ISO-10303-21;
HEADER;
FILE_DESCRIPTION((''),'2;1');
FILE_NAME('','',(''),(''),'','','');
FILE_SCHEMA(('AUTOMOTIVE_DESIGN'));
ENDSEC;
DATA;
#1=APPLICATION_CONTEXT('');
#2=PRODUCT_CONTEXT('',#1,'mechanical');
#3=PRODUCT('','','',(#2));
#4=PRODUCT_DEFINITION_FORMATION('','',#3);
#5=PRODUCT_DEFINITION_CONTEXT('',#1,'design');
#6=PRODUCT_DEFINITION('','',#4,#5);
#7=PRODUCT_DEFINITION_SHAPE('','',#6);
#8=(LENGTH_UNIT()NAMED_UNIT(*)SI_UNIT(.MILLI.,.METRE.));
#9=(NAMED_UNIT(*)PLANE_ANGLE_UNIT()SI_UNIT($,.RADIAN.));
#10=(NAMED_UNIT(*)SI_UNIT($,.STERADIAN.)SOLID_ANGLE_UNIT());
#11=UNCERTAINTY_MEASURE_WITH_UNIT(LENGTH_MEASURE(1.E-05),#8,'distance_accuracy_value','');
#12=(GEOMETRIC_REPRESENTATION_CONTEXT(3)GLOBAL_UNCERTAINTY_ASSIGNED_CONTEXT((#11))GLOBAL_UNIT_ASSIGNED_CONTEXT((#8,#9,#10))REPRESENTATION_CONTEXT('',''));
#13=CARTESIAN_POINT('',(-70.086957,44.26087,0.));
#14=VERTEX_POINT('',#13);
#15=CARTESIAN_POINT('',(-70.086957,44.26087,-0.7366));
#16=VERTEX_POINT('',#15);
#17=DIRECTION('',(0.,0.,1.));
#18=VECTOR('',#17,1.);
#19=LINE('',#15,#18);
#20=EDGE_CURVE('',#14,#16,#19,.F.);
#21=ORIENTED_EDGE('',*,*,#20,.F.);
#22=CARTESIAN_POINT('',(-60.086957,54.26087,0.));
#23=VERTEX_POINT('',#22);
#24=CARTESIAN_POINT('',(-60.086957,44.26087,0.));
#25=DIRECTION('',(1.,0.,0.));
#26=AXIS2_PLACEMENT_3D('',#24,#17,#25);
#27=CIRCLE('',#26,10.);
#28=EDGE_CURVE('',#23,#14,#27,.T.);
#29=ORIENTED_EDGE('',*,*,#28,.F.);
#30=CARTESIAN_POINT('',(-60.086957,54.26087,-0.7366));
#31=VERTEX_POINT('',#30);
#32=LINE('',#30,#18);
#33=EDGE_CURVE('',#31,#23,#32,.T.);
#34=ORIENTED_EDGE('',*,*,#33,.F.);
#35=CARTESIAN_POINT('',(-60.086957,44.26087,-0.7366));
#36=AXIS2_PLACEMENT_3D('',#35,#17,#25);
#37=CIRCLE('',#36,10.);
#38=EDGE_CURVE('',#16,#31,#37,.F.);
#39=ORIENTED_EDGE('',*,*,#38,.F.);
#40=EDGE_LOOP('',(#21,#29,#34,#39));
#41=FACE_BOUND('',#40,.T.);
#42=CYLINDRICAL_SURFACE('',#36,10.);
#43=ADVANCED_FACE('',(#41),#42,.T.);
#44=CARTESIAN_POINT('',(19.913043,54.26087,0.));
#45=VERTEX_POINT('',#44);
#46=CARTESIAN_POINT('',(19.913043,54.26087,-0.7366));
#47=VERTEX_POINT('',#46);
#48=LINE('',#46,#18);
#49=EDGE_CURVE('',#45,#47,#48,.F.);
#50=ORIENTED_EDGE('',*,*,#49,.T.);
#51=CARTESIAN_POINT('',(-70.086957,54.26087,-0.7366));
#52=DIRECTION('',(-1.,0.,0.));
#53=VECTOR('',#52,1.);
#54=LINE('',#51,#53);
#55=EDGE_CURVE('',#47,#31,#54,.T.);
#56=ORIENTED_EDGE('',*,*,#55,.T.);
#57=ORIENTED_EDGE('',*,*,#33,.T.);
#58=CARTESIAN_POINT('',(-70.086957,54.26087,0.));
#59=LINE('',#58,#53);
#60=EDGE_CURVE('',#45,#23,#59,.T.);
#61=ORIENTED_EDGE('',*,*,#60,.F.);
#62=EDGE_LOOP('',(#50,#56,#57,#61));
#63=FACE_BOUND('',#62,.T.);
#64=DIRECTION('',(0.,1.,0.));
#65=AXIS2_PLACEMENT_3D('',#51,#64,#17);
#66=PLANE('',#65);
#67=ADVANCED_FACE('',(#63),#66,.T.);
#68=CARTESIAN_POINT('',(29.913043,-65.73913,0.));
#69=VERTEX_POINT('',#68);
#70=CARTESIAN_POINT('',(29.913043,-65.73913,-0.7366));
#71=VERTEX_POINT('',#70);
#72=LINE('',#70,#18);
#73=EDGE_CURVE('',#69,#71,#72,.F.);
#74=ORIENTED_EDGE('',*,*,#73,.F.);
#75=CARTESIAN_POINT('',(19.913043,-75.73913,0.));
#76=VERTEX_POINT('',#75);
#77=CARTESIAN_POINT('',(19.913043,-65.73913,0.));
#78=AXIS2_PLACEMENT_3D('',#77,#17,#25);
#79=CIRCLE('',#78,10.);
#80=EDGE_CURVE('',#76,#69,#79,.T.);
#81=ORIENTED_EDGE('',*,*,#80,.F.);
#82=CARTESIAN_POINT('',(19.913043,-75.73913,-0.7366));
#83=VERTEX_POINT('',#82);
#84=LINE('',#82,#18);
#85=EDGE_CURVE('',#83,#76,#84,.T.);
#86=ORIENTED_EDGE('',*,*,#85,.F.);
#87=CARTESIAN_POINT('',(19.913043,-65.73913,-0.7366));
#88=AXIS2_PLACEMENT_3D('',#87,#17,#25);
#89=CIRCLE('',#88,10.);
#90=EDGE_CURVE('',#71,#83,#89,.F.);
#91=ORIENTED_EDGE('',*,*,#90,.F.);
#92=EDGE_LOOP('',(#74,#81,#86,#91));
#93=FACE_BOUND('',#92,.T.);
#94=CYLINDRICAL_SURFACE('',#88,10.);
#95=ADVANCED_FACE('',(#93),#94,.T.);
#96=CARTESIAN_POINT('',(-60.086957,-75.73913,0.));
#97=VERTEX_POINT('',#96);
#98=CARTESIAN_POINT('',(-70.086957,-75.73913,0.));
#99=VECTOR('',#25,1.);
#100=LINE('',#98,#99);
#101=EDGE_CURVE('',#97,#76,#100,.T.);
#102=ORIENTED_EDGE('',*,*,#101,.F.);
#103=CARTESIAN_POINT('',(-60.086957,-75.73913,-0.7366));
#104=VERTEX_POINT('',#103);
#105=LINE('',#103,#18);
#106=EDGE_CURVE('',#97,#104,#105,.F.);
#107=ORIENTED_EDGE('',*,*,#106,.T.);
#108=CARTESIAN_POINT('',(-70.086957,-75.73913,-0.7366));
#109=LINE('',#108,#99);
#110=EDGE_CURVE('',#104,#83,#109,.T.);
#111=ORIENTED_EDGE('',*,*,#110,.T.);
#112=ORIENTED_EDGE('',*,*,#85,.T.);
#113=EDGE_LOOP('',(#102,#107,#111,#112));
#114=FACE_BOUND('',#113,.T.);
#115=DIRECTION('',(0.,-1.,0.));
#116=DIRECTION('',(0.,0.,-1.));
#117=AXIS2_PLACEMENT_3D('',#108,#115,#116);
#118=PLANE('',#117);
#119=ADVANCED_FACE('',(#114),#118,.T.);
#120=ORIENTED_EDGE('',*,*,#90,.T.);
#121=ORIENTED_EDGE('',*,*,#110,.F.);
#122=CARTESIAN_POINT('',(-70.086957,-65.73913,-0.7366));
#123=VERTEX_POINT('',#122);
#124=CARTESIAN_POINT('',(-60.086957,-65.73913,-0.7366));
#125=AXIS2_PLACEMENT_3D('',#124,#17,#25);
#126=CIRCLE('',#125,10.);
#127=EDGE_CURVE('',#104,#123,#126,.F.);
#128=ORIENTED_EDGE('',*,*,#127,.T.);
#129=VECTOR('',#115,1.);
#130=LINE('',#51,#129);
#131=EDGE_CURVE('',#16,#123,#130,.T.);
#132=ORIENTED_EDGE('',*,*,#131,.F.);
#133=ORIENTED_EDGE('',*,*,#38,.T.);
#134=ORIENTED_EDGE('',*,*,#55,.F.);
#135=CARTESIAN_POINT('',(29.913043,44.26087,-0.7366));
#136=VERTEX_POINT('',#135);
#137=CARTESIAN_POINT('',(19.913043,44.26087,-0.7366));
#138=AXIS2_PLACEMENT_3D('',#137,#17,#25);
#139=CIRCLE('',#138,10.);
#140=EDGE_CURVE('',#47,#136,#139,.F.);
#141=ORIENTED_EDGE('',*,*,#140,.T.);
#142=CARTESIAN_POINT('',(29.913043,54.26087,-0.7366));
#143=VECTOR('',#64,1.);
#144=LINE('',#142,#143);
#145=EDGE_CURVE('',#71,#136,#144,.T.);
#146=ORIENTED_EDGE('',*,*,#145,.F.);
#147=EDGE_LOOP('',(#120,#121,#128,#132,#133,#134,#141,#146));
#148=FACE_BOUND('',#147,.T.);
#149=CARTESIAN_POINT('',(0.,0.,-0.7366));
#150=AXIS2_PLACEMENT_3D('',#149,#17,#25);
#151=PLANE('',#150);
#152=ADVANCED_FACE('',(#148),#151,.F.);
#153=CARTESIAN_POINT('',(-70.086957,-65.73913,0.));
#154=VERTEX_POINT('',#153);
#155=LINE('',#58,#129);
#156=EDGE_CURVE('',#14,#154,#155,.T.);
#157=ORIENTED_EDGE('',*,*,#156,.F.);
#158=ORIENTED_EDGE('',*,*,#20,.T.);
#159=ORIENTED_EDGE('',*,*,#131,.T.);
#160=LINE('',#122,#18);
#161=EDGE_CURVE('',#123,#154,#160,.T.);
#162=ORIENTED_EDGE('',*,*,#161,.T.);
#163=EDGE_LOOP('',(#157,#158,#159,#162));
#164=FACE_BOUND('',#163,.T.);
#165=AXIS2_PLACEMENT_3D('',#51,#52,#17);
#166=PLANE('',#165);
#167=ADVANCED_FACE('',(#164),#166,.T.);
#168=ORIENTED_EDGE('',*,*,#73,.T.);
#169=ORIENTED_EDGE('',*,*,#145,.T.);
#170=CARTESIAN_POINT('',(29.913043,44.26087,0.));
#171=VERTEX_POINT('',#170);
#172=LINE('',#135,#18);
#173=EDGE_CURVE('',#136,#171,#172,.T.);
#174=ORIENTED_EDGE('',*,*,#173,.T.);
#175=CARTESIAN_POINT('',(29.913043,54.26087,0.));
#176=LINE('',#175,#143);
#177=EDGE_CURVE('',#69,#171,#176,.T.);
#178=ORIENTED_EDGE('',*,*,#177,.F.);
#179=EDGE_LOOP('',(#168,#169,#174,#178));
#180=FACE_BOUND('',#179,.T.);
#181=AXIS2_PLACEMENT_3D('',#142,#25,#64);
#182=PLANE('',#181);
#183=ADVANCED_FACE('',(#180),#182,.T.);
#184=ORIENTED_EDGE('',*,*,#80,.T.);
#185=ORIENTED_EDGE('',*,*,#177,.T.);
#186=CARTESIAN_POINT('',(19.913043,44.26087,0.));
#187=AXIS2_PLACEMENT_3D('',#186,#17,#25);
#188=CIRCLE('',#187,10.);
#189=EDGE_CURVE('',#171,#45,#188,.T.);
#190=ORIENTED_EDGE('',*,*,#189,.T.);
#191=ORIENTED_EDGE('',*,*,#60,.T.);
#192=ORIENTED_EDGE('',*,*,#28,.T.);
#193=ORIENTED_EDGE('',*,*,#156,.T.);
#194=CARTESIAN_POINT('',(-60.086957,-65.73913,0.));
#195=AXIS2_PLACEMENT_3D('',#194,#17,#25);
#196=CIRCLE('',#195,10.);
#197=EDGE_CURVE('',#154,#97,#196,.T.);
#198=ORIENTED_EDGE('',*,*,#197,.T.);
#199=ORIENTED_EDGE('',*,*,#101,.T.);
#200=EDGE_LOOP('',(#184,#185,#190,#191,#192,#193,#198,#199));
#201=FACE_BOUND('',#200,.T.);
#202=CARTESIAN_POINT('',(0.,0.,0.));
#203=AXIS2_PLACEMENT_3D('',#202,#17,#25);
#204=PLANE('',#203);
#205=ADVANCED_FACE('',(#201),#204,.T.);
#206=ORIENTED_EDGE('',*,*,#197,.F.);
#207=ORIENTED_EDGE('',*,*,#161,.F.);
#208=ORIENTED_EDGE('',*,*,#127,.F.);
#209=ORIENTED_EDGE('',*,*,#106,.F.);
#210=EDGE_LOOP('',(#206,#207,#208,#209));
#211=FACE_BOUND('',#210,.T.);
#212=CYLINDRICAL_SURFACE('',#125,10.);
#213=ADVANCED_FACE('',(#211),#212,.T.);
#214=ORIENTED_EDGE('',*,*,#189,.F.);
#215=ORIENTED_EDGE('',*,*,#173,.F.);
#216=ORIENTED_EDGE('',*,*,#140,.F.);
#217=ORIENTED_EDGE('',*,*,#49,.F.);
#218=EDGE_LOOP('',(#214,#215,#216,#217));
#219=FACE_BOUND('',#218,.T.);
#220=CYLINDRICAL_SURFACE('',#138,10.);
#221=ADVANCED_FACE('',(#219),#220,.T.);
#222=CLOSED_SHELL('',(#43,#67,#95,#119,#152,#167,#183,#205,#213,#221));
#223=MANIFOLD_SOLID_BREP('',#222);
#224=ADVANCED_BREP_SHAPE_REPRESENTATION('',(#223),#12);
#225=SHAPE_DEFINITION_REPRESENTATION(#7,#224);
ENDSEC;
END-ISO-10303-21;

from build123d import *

# Parameters (mm, degrees)
SKETCH2_W           = 100
SKETCH2_H           = 130
BASE_FLANGE1_DEPTH  = 0.7366
BREAK_CORNER1_START = -0.7366
BREAK_CORNER1_DEPTH = 0.7366


# Read off the part's stored shape, not the designer's step: Break-Corner1
# Sheet-metal steps are written as plain solids
with BuildPart() as part:
    # Sketch2 → Base-Flange1 (new body)
    with BuildSketch(Plane.XY):
        with Locations((-20.086956522, -10.739130435)):
            Rectangle(SKETCH2_W, SKETCH2_H)
    extrude(amount=-BASE_FLANGE1_DEPTH)

    # Break-Corner1 outline → Break-Corner1 (cut)
    with BuildSketch(Plane.XY.offset(BREAK_CORNER1_START)):
        with BuildLine():
            ThreePointArc((-70.086956522, 44.260869565), (-67.158024334, 51.331937377), (-60.086956522, 54.260869565))
            Line((-60.086956522, 54.260869565), (-70.086956522, 54.260869565))
            Line((-70.086956522, 54.260869565), (-70.086956522, 44.260869565))
        make_face()
        with BuildLine():
            Line((29.913043478, 54.260869565), (19.913043478, 54.260869565))
            ThreePointArc((19.913043478, 54.260869565), (26.98411129, 51.331937377), (29.913043478, 44.260869565))
            Line((29.913043478, 44.260869565), (29.913043478, 54.260869565))
        make_face()
        with BuildLine():
            ThreePointArc((-60.086956522, -75.739130435), (-67.158024334, -72.810198247), (-70.086956522, -65.739130435))
            Line((-70.086956522, -65.739130435), (-70.086956522, -75.739130435))
            Line((-70.086956522, -75.739130435), (-60.086956522, -75.739130435))
        make_face()
        with BuildLine():
            Line((29.913043478, -75.739130435), (29.913043478, -65.739130435))
            ThreePointArc((29.913043478, -65.739130435), (26.98411129, -72.810198247), (19.913043478, -75.739130435))
            Line((19.913043478, -75.739130435), (29.913043478, -75.739130435))
        make_face()
    extrude(amount=BREAK_CORNER1_DEPTH, mode=Mode.SUBTRACT)


solid = part.part
